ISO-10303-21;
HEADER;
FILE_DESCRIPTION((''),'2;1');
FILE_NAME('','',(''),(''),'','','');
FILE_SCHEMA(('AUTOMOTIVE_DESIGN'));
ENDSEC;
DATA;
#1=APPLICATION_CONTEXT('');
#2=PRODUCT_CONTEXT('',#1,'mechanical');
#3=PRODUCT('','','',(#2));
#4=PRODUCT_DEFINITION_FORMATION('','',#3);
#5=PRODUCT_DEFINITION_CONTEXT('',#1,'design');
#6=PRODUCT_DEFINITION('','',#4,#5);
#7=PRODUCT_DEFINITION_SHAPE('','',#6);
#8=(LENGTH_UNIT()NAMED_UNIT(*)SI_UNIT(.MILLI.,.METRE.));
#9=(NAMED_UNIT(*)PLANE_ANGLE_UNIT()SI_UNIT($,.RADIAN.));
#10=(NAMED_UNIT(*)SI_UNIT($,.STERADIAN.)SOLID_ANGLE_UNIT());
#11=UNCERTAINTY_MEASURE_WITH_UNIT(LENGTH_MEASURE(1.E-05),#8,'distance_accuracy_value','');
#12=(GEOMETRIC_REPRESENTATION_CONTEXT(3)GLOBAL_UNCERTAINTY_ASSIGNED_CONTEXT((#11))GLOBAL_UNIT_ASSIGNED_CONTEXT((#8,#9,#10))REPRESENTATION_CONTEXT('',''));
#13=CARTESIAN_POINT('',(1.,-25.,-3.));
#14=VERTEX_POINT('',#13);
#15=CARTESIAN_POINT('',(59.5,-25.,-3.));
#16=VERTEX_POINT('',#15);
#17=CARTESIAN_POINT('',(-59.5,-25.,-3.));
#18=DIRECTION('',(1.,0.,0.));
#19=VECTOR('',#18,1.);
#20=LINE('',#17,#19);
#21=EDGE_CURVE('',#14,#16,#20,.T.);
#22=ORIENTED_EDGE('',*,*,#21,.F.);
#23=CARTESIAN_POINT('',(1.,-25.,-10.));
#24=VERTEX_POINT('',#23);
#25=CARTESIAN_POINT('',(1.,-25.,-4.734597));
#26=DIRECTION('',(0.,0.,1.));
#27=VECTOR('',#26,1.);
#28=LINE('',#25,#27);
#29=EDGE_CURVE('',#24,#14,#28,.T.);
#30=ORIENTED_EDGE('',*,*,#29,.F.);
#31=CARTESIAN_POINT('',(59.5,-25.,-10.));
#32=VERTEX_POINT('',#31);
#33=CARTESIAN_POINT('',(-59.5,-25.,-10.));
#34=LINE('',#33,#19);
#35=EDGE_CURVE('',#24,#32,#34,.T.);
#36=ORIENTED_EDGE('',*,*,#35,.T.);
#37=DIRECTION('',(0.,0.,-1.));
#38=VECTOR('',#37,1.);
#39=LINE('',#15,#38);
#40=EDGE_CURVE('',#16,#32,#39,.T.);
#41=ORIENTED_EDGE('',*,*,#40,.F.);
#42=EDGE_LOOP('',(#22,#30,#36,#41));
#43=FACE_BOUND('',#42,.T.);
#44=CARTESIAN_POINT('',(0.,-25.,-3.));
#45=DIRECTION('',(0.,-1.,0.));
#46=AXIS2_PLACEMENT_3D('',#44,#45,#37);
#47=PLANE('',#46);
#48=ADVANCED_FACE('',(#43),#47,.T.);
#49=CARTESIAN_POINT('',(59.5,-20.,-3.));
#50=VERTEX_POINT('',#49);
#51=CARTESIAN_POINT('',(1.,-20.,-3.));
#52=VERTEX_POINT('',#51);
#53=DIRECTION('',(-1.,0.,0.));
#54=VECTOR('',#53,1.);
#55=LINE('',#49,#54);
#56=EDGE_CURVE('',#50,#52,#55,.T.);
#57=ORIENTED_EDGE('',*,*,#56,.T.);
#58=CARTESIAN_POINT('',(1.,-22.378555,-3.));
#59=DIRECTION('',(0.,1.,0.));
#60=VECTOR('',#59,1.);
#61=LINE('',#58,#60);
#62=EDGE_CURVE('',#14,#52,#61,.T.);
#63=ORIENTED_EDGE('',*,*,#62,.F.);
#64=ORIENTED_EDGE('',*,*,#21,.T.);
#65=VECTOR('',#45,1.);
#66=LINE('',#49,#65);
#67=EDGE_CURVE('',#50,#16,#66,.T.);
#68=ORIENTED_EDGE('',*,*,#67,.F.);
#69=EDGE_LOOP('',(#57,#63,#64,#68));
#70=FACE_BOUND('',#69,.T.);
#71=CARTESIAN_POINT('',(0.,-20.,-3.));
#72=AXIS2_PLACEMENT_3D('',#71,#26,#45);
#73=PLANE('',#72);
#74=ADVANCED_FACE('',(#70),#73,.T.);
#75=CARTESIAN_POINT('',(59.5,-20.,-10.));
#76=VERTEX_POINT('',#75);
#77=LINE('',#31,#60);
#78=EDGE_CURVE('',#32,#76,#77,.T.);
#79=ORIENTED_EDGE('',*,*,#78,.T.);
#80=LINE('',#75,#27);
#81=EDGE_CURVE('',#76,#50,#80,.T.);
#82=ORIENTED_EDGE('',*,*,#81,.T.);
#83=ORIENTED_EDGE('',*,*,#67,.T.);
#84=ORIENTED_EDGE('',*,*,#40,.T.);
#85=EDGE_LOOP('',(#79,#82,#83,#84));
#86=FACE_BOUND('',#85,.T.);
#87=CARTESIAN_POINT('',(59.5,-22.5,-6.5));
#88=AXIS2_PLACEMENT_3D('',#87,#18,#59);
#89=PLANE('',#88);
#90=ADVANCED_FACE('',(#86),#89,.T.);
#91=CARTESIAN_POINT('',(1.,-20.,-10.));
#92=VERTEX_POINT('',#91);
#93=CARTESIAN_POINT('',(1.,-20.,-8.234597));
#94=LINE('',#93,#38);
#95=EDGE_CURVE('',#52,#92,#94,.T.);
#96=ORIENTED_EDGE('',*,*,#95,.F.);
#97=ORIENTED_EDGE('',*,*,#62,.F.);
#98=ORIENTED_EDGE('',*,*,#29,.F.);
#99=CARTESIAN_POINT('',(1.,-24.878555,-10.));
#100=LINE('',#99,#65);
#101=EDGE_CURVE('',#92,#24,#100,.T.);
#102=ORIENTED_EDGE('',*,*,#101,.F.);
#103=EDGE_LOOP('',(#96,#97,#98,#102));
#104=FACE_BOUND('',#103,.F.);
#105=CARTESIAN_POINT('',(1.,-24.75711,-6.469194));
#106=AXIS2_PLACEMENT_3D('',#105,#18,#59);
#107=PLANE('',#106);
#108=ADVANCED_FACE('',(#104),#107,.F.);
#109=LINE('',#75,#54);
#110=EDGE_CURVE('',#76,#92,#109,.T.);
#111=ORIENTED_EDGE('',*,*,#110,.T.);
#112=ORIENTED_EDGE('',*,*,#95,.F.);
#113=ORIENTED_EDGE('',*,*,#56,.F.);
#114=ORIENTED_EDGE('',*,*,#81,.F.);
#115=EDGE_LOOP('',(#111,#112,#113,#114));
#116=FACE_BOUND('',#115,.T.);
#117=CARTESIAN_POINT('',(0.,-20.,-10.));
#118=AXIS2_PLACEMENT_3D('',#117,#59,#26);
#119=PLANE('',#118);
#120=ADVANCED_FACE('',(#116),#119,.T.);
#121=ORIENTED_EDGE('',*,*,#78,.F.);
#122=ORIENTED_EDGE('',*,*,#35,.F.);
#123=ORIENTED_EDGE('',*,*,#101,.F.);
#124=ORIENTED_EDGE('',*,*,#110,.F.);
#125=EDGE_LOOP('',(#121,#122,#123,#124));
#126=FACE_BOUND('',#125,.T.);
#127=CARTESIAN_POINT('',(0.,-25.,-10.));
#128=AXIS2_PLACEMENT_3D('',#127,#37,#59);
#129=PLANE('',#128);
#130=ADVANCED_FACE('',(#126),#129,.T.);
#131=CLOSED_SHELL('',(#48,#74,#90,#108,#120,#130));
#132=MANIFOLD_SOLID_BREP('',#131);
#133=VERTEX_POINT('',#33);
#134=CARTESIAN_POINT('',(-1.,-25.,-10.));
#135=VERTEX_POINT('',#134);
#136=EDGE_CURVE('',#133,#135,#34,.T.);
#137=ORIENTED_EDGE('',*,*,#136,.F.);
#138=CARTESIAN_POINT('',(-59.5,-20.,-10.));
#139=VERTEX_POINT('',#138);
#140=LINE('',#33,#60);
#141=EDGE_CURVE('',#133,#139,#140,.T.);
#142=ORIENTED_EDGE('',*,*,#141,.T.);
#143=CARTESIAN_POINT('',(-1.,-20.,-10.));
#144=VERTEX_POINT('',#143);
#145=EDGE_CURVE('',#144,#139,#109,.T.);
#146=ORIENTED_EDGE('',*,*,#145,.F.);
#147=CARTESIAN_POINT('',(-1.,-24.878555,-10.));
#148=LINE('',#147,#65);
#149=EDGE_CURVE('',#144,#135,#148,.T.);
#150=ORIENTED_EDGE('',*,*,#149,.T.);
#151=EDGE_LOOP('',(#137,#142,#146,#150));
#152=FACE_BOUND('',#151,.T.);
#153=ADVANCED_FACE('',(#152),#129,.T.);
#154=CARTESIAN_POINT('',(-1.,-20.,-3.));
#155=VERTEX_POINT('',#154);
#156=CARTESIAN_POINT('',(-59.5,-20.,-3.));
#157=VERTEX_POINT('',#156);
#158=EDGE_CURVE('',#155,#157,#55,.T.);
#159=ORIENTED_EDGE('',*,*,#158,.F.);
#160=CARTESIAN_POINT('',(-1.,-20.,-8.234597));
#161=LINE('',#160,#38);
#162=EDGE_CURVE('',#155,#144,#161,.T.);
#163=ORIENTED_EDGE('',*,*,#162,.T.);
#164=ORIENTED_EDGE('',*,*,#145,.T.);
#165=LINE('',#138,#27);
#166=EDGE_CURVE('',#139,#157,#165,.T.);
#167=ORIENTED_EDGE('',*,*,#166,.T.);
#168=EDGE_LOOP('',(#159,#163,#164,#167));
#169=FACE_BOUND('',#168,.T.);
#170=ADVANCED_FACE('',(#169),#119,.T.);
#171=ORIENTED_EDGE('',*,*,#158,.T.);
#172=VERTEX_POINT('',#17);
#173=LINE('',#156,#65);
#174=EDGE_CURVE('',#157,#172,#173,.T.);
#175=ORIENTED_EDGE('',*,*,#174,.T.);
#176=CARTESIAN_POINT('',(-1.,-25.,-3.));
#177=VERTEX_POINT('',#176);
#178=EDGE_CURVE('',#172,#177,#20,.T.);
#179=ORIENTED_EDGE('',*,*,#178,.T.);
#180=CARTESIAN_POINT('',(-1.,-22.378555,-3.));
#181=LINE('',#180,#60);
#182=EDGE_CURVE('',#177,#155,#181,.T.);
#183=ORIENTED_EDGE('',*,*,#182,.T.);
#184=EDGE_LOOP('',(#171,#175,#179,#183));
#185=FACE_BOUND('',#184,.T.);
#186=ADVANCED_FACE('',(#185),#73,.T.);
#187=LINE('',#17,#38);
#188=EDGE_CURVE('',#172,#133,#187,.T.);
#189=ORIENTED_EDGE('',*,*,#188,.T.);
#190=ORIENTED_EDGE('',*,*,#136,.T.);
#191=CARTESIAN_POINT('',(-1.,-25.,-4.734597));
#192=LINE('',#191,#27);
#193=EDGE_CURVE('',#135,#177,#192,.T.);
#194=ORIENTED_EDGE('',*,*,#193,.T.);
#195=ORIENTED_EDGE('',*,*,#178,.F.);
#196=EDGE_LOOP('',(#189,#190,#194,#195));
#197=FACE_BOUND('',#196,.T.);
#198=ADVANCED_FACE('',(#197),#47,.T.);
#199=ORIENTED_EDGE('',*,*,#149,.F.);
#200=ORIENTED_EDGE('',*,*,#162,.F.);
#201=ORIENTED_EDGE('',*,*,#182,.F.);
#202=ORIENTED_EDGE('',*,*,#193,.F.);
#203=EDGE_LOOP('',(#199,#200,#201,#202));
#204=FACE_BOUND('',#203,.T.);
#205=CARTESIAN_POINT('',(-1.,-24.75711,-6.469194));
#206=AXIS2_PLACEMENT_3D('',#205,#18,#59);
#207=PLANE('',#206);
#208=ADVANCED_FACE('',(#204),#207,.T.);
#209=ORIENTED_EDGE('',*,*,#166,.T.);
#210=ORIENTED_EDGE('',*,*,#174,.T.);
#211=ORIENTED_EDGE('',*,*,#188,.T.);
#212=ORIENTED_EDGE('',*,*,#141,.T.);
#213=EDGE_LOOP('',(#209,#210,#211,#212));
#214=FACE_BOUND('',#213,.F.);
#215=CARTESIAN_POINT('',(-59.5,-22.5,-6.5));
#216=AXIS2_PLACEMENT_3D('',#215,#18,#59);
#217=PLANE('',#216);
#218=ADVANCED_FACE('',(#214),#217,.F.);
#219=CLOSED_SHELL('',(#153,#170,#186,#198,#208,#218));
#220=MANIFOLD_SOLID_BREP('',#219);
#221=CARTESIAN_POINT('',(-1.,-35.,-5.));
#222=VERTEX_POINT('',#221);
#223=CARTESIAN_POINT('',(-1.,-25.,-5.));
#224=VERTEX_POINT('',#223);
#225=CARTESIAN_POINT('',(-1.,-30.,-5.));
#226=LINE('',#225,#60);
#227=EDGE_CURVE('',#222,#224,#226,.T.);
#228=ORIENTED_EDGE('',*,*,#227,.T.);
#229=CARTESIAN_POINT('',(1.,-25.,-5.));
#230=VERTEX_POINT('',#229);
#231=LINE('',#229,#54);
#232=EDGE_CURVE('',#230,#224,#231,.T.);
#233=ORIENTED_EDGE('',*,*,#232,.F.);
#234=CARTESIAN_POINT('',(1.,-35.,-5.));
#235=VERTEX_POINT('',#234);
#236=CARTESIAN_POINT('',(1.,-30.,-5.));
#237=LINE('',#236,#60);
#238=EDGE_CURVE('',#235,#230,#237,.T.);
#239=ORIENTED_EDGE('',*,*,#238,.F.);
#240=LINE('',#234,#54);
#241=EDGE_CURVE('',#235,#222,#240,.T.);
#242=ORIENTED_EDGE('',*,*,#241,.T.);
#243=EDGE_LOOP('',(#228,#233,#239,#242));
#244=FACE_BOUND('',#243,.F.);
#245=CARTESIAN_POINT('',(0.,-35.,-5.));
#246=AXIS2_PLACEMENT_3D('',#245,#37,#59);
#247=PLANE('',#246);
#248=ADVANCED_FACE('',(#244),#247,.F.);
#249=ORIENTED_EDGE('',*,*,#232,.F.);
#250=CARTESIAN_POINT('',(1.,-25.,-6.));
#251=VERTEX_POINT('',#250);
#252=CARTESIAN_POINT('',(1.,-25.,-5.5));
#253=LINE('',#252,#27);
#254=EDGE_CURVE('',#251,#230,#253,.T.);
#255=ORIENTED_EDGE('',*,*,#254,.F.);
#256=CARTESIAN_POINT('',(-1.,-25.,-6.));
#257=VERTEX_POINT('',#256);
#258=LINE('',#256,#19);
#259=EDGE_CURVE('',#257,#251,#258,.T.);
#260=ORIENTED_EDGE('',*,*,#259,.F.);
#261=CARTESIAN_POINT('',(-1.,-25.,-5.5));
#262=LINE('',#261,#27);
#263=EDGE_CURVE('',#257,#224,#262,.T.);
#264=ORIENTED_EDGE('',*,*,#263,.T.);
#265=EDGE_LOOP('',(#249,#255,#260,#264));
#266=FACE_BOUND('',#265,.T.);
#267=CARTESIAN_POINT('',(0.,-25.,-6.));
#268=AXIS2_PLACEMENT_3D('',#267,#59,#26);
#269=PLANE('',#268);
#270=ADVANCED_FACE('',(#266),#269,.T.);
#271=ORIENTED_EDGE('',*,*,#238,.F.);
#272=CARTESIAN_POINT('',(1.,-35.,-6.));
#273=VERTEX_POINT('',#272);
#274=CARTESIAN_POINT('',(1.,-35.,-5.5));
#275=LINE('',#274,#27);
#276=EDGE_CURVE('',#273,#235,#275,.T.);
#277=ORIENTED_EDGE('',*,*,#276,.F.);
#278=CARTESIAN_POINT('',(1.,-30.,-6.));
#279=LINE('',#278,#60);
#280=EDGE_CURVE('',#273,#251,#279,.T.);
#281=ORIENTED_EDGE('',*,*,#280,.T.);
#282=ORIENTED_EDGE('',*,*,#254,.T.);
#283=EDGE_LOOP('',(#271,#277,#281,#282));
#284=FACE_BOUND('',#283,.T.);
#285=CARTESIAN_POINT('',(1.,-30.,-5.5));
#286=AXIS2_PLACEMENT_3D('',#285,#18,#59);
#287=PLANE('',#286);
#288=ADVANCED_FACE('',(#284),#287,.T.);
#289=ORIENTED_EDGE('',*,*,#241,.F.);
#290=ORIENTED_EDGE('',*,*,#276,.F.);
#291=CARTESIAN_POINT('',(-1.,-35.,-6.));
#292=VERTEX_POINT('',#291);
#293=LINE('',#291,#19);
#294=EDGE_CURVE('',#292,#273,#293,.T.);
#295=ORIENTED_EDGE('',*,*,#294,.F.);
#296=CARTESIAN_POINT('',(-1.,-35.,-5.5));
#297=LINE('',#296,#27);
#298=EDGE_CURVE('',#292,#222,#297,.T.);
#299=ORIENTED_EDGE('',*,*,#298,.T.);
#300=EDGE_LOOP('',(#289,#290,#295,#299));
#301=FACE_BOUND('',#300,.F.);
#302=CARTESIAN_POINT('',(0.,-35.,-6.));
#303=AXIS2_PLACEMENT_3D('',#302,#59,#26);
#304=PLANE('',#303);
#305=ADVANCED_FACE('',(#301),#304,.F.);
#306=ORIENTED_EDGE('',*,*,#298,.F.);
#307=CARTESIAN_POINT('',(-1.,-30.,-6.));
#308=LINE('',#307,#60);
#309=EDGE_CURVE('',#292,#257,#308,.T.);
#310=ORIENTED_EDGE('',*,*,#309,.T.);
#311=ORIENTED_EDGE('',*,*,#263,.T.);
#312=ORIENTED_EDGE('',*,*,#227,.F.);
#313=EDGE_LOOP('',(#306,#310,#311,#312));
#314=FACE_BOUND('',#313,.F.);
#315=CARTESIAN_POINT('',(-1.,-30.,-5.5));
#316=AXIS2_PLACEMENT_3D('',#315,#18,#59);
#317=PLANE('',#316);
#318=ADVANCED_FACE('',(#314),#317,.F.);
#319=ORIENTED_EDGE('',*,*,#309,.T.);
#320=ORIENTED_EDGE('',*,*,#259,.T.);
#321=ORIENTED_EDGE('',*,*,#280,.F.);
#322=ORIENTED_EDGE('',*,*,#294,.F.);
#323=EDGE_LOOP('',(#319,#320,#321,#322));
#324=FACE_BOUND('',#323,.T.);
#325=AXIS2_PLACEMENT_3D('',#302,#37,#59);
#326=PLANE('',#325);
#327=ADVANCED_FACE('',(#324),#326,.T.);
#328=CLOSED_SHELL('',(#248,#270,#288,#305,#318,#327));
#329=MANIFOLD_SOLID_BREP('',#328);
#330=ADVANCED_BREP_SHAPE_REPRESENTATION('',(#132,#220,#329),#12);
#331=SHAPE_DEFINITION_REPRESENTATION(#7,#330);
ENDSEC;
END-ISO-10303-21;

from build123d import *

# Parameters (mm, degrees)
F1_DEPTH = 59.5
F0_W     = 10
F0_H     = 1
F2_DEPTH = 1
F3_W     = 25.6279632449
F3_H     = 26.6232225113
F4_DEPTH = 1


# Not quite as in the source:
# - a feature of the source that left no trace in its solid (it failed there, or was rolled back) is left out


with BuildPart() as f1:
    # F0 (on Right) → F1 (new body, symmetric)
    with BuildSketch(Plane.YZ):
        Polygon((-20, -3), (-25, -3), (-25, -5), (-25, -6), (-25, -10), (-20, -10), align=None)
    extrude(amount=F1_DEPTH, both=True)

    # F3 (on Right) → F4 (cut, symmetric)
    with BuildSketch(Plane.YZ):
        with Locations((-24.7571095824, -6.4691940788)):
            Rectangle(F3_W, F3_H)
    extrude(amount=F4_DEPTH, both=True, mode=Mode.SUBTRACT)


with BuildPart() as f2:
    # F0 (on Right) → F2 (new body, symmetric)
    with BuildSketch(Plane.YZ):
        with Locations((-30, -5.5)):
            Rectangle(F0_W, F0_H)
    extrude(amount=F2_DEPTH, both=True)


solid = Compound([f1.part, f2.part])
